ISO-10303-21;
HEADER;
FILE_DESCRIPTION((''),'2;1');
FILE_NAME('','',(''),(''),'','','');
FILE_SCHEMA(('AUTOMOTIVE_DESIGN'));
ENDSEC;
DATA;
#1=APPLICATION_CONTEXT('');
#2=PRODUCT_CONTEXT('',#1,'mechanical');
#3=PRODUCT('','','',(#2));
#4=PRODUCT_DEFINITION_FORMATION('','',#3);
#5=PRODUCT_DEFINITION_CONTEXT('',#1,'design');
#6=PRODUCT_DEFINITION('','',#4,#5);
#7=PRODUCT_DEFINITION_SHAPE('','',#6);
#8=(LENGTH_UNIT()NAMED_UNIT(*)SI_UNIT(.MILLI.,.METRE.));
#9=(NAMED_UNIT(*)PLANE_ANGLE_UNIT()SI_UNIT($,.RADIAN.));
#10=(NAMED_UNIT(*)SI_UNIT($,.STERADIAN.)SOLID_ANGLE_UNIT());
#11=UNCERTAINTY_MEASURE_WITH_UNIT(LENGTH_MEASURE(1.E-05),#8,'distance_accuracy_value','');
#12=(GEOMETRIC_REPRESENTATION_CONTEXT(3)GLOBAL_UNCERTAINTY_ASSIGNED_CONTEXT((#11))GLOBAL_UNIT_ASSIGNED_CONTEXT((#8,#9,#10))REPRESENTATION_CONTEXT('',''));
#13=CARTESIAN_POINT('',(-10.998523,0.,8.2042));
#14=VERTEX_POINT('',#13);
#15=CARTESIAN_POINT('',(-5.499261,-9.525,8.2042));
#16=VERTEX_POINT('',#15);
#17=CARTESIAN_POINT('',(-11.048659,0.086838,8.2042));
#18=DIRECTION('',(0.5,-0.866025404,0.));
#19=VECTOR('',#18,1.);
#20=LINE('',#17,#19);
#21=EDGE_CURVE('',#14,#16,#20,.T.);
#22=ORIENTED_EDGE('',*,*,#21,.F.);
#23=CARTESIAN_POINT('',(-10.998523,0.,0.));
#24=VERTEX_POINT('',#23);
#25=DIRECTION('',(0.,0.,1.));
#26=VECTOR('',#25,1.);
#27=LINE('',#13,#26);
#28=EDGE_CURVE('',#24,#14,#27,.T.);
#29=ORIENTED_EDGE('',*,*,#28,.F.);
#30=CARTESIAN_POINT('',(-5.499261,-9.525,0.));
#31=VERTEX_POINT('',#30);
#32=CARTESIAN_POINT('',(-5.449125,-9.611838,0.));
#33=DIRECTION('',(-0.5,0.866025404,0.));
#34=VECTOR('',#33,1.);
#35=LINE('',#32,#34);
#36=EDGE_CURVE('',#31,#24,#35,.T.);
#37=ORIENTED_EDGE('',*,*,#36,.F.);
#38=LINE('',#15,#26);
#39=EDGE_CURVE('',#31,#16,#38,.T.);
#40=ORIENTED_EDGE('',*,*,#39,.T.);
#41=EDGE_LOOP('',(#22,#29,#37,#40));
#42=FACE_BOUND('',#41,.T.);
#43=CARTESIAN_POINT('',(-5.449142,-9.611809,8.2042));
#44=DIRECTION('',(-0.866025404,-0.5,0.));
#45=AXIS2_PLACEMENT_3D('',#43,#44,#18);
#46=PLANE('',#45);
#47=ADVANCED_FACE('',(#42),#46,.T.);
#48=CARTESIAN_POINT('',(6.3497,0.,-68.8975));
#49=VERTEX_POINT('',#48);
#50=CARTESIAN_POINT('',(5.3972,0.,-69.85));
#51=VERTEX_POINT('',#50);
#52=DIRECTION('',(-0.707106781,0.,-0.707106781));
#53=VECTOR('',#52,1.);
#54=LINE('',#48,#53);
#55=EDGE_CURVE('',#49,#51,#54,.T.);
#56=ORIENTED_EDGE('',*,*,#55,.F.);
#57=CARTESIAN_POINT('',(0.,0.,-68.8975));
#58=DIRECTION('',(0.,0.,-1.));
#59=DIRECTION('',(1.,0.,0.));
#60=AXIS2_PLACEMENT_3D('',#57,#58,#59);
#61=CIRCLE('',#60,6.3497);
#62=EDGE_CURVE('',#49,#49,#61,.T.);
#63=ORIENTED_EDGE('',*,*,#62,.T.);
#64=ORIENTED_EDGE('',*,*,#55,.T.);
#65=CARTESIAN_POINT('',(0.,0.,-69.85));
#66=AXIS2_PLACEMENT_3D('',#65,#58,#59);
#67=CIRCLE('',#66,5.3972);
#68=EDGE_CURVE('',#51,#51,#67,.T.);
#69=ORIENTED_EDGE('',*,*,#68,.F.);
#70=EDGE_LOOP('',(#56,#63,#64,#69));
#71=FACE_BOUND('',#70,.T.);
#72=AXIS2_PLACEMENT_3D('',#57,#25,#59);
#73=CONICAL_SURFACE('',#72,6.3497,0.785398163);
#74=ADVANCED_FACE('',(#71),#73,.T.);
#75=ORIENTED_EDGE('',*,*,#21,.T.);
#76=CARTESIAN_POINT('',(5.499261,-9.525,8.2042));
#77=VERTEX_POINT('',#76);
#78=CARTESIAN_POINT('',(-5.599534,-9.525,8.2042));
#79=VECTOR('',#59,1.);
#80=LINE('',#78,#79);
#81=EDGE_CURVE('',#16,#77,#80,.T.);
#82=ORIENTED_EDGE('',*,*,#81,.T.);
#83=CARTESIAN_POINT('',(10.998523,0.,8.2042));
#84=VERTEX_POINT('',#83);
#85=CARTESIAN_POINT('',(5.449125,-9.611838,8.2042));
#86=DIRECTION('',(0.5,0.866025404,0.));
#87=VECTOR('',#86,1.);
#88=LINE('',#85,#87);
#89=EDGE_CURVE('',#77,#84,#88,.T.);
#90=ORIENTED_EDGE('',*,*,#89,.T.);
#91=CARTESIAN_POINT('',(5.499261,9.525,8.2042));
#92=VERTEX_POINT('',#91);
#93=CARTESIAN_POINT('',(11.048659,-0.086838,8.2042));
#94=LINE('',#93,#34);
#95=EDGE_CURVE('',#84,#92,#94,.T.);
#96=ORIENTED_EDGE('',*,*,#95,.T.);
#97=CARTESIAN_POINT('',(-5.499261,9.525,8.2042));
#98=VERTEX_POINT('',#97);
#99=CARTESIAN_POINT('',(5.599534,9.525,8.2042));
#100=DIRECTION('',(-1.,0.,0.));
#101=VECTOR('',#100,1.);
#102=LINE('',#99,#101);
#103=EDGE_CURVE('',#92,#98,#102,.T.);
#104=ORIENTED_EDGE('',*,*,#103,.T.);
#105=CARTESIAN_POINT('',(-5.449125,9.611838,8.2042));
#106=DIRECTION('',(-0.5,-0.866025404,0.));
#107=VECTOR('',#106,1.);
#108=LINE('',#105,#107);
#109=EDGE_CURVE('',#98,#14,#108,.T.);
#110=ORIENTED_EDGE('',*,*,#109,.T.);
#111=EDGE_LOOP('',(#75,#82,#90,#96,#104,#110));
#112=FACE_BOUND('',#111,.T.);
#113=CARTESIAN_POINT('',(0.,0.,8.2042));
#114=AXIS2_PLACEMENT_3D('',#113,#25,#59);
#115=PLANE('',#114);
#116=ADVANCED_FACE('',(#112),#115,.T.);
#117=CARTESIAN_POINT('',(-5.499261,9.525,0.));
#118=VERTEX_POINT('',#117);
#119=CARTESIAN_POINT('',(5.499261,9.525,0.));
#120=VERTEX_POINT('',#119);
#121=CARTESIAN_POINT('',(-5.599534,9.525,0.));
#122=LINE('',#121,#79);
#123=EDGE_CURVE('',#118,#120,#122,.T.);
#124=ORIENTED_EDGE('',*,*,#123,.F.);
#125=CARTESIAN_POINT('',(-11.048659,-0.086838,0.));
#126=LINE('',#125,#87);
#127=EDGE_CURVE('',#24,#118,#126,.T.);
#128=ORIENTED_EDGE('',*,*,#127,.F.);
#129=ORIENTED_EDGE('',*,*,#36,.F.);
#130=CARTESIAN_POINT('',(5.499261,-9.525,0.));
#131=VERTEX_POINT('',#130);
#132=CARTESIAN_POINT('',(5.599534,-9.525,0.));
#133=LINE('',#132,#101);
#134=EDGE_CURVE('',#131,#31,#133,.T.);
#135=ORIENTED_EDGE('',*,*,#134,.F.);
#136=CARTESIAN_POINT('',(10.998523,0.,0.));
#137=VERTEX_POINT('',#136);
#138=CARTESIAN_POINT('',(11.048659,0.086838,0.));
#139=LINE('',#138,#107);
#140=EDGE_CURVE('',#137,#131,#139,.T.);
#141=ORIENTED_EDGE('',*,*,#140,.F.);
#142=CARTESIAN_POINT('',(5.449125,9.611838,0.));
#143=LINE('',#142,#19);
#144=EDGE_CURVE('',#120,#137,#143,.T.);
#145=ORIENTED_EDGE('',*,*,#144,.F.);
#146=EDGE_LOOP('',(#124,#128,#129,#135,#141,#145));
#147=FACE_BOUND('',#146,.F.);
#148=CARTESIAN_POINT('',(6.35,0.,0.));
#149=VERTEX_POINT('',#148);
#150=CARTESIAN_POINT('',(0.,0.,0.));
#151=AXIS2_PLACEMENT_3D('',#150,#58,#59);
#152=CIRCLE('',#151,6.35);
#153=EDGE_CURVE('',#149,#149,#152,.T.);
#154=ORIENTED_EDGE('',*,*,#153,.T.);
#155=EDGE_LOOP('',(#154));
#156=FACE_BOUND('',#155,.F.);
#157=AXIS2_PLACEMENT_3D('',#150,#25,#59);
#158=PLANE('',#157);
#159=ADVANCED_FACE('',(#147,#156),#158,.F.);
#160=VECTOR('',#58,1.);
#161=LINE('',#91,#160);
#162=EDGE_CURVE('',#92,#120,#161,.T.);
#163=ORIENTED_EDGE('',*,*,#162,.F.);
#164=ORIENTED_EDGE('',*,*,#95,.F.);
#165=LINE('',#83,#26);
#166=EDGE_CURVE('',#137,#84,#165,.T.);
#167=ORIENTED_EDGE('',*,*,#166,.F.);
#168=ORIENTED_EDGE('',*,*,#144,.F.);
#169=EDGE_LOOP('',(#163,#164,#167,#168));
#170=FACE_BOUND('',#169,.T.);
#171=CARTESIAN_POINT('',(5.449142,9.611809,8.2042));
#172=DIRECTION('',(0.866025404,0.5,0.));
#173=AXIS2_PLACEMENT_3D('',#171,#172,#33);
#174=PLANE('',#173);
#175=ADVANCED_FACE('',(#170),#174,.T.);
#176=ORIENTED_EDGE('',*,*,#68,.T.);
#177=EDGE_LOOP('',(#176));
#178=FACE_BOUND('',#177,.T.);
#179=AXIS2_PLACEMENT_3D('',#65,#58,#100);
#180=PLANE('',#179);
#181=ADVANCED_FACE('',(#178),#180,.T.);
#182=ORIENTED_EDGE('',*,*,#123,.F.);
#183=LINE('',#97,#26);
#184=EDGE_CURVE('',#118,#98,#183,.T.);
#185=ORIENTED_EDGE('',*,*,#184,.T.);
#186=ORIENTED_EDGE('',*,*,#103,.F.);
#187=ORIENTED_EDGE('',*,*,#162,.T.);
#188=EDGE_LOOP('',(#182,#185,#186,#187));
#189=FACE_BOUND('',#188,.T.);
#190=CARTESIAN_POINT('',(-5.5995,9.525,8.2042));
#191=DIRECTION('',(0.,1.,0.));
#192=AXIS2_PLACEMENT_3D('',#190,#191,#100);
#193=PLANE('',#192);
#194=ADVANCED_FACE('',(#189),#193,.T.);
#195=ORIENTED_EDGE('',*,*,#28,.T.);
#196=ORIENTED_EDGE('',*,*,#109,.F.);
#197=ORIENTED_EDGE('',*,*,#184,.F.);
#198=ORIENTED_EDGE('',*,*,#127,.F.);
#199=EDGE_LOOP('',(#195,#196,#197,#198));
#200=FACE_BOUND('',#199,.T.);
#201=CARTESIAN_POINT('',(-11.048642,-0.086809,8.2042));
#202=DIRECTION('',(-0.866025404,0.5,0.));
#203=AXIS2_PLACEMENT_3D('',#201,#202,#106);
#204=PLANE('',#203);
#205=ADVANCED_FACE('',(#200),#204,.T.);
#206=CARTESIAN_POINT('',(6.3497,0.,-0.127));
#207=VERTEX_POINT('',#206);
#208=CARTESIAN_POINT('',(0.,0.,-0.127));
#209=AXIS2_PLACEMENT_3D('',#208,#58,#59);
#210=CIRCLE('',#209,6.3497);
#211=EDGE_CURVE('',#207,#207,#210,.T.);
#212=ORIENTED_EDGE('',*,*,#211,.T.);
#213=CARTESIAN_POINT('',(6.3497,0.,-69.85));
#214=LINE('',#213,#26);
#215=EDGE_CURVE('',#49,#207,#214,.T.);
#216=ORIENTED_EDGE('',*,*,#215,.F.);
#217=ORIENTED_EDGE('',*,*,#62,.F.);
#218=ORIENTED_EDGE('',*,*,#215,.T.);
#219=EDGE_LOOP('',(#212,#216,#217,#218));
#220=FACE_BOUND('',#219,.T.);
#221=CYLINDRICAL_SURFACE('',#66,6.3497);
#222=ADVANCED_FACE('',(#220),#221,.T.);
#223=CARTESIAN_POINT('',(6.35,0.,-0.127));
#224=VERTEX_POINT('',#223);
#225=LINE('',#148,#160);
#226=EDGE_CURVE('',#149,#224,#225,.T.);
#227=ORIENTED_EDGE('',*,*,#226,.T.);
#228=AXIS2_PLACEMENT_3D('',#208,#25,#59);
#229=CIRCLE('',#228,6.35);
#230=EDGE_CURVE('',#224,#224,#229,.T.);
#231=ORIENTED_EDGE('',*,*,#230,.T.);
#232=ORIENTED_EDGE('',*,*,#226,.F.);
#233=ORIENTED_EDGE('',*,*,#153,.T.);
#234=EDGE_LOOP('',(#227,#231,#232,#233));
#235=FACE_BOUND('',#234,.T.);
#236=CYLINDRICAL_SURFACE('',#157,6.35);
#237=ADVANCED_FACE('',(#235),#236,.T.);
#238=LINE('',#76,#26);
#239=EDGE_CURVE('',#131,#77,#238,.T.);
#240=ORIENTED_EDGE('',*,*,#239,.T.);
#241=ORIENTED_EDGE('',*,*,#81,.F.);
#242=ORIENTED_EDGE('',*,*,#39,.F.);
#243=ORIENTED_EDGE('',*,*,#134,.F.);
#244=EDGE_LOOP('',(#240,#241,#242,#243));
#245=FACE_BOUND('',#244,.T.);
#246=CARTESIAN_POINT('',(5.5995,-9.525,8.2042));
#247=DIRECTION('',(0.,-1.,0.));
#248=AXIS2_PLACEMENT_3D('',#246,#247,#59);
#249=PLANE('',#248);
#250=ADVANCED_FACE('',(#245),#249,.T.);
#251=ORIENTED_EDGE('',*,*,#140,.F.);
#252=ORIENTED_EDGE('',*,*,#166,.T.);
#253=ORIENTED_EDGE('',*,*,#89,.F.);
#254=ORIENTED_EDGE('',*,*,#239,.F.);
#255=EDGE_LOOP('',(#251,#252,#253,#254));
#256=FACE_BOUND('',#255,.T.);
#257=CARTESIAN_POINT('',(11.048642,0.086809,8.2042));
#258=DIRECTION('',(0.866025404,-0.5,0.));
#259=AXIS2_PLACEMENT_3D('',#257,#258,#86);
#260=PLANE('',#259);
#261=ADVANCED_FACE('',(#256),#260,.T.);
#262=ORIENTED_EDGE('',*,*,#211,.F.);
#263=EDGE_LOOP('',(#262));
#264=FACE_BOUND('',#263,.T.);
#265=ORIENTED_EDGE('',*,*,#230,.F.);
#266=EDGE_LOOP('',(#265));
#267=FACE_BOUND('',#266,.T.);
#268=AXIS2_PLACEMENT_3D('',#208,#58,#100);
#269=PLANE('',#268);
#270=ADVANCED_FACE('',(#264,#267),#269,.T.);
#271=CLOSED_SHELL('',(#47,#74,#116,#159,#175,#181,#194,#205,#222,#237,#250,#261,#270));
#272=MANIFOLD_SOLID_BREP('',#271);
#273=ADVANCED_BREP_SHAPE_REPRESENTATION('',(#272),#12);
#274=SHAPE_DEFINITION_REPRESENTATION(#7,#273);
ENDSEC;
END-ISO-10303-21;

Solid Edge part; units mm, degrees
sketch "Sketch1" plane through (0, 0, 0) normal (0, 0, 1) x (1, 0, 0)
  circle A0 centre (0, 0) radius 11.049
  dimension "D1" = 22.098
extrude "Protrusion1" add sketch "Sketch1" along normal blind 8.2042
sketch "Sketch2" plane through (0, 0, 0) normal (0, 0, -1) x (1, 0, 0)
  circle A0 centre (0, 0) radius 6.35
extrude "Protrusion2" add sketch "Sketch2" along normal blind 69.85
sketch "Sketch3" plane through (0, 0, -69.85) normal (0, 0, -1) x (1, 0, 0)
  circle A0 centre (0, 0) radius 6.3497
extrude "Cutout1" cut sketch "Sketch3" against normal blind 69.723 flip side to cut
chamfer "Chamfer_1" distance 0.9525 angle 45 1 edges at (-6.3497, 0, -69.85)
sketch "Sketch4" plane through (0, 0, 8.2042) normal (0, 0, 1) x (1, 0, 0)
  line L0 (-5.5995, 9.525) -> (5.5995, 9.525)
  dimension "D1" = 19.05
extrude "Cutout2" cut sketch "Sketch4" against normal up to next material side at (0, 9.575, 8.2042)
pattern_circular "Pattern1" count 6 over 360 about axis through (0, 0, 8.2042) along (0, 0, 1) of "Cutout2"
properties part number "127003"
